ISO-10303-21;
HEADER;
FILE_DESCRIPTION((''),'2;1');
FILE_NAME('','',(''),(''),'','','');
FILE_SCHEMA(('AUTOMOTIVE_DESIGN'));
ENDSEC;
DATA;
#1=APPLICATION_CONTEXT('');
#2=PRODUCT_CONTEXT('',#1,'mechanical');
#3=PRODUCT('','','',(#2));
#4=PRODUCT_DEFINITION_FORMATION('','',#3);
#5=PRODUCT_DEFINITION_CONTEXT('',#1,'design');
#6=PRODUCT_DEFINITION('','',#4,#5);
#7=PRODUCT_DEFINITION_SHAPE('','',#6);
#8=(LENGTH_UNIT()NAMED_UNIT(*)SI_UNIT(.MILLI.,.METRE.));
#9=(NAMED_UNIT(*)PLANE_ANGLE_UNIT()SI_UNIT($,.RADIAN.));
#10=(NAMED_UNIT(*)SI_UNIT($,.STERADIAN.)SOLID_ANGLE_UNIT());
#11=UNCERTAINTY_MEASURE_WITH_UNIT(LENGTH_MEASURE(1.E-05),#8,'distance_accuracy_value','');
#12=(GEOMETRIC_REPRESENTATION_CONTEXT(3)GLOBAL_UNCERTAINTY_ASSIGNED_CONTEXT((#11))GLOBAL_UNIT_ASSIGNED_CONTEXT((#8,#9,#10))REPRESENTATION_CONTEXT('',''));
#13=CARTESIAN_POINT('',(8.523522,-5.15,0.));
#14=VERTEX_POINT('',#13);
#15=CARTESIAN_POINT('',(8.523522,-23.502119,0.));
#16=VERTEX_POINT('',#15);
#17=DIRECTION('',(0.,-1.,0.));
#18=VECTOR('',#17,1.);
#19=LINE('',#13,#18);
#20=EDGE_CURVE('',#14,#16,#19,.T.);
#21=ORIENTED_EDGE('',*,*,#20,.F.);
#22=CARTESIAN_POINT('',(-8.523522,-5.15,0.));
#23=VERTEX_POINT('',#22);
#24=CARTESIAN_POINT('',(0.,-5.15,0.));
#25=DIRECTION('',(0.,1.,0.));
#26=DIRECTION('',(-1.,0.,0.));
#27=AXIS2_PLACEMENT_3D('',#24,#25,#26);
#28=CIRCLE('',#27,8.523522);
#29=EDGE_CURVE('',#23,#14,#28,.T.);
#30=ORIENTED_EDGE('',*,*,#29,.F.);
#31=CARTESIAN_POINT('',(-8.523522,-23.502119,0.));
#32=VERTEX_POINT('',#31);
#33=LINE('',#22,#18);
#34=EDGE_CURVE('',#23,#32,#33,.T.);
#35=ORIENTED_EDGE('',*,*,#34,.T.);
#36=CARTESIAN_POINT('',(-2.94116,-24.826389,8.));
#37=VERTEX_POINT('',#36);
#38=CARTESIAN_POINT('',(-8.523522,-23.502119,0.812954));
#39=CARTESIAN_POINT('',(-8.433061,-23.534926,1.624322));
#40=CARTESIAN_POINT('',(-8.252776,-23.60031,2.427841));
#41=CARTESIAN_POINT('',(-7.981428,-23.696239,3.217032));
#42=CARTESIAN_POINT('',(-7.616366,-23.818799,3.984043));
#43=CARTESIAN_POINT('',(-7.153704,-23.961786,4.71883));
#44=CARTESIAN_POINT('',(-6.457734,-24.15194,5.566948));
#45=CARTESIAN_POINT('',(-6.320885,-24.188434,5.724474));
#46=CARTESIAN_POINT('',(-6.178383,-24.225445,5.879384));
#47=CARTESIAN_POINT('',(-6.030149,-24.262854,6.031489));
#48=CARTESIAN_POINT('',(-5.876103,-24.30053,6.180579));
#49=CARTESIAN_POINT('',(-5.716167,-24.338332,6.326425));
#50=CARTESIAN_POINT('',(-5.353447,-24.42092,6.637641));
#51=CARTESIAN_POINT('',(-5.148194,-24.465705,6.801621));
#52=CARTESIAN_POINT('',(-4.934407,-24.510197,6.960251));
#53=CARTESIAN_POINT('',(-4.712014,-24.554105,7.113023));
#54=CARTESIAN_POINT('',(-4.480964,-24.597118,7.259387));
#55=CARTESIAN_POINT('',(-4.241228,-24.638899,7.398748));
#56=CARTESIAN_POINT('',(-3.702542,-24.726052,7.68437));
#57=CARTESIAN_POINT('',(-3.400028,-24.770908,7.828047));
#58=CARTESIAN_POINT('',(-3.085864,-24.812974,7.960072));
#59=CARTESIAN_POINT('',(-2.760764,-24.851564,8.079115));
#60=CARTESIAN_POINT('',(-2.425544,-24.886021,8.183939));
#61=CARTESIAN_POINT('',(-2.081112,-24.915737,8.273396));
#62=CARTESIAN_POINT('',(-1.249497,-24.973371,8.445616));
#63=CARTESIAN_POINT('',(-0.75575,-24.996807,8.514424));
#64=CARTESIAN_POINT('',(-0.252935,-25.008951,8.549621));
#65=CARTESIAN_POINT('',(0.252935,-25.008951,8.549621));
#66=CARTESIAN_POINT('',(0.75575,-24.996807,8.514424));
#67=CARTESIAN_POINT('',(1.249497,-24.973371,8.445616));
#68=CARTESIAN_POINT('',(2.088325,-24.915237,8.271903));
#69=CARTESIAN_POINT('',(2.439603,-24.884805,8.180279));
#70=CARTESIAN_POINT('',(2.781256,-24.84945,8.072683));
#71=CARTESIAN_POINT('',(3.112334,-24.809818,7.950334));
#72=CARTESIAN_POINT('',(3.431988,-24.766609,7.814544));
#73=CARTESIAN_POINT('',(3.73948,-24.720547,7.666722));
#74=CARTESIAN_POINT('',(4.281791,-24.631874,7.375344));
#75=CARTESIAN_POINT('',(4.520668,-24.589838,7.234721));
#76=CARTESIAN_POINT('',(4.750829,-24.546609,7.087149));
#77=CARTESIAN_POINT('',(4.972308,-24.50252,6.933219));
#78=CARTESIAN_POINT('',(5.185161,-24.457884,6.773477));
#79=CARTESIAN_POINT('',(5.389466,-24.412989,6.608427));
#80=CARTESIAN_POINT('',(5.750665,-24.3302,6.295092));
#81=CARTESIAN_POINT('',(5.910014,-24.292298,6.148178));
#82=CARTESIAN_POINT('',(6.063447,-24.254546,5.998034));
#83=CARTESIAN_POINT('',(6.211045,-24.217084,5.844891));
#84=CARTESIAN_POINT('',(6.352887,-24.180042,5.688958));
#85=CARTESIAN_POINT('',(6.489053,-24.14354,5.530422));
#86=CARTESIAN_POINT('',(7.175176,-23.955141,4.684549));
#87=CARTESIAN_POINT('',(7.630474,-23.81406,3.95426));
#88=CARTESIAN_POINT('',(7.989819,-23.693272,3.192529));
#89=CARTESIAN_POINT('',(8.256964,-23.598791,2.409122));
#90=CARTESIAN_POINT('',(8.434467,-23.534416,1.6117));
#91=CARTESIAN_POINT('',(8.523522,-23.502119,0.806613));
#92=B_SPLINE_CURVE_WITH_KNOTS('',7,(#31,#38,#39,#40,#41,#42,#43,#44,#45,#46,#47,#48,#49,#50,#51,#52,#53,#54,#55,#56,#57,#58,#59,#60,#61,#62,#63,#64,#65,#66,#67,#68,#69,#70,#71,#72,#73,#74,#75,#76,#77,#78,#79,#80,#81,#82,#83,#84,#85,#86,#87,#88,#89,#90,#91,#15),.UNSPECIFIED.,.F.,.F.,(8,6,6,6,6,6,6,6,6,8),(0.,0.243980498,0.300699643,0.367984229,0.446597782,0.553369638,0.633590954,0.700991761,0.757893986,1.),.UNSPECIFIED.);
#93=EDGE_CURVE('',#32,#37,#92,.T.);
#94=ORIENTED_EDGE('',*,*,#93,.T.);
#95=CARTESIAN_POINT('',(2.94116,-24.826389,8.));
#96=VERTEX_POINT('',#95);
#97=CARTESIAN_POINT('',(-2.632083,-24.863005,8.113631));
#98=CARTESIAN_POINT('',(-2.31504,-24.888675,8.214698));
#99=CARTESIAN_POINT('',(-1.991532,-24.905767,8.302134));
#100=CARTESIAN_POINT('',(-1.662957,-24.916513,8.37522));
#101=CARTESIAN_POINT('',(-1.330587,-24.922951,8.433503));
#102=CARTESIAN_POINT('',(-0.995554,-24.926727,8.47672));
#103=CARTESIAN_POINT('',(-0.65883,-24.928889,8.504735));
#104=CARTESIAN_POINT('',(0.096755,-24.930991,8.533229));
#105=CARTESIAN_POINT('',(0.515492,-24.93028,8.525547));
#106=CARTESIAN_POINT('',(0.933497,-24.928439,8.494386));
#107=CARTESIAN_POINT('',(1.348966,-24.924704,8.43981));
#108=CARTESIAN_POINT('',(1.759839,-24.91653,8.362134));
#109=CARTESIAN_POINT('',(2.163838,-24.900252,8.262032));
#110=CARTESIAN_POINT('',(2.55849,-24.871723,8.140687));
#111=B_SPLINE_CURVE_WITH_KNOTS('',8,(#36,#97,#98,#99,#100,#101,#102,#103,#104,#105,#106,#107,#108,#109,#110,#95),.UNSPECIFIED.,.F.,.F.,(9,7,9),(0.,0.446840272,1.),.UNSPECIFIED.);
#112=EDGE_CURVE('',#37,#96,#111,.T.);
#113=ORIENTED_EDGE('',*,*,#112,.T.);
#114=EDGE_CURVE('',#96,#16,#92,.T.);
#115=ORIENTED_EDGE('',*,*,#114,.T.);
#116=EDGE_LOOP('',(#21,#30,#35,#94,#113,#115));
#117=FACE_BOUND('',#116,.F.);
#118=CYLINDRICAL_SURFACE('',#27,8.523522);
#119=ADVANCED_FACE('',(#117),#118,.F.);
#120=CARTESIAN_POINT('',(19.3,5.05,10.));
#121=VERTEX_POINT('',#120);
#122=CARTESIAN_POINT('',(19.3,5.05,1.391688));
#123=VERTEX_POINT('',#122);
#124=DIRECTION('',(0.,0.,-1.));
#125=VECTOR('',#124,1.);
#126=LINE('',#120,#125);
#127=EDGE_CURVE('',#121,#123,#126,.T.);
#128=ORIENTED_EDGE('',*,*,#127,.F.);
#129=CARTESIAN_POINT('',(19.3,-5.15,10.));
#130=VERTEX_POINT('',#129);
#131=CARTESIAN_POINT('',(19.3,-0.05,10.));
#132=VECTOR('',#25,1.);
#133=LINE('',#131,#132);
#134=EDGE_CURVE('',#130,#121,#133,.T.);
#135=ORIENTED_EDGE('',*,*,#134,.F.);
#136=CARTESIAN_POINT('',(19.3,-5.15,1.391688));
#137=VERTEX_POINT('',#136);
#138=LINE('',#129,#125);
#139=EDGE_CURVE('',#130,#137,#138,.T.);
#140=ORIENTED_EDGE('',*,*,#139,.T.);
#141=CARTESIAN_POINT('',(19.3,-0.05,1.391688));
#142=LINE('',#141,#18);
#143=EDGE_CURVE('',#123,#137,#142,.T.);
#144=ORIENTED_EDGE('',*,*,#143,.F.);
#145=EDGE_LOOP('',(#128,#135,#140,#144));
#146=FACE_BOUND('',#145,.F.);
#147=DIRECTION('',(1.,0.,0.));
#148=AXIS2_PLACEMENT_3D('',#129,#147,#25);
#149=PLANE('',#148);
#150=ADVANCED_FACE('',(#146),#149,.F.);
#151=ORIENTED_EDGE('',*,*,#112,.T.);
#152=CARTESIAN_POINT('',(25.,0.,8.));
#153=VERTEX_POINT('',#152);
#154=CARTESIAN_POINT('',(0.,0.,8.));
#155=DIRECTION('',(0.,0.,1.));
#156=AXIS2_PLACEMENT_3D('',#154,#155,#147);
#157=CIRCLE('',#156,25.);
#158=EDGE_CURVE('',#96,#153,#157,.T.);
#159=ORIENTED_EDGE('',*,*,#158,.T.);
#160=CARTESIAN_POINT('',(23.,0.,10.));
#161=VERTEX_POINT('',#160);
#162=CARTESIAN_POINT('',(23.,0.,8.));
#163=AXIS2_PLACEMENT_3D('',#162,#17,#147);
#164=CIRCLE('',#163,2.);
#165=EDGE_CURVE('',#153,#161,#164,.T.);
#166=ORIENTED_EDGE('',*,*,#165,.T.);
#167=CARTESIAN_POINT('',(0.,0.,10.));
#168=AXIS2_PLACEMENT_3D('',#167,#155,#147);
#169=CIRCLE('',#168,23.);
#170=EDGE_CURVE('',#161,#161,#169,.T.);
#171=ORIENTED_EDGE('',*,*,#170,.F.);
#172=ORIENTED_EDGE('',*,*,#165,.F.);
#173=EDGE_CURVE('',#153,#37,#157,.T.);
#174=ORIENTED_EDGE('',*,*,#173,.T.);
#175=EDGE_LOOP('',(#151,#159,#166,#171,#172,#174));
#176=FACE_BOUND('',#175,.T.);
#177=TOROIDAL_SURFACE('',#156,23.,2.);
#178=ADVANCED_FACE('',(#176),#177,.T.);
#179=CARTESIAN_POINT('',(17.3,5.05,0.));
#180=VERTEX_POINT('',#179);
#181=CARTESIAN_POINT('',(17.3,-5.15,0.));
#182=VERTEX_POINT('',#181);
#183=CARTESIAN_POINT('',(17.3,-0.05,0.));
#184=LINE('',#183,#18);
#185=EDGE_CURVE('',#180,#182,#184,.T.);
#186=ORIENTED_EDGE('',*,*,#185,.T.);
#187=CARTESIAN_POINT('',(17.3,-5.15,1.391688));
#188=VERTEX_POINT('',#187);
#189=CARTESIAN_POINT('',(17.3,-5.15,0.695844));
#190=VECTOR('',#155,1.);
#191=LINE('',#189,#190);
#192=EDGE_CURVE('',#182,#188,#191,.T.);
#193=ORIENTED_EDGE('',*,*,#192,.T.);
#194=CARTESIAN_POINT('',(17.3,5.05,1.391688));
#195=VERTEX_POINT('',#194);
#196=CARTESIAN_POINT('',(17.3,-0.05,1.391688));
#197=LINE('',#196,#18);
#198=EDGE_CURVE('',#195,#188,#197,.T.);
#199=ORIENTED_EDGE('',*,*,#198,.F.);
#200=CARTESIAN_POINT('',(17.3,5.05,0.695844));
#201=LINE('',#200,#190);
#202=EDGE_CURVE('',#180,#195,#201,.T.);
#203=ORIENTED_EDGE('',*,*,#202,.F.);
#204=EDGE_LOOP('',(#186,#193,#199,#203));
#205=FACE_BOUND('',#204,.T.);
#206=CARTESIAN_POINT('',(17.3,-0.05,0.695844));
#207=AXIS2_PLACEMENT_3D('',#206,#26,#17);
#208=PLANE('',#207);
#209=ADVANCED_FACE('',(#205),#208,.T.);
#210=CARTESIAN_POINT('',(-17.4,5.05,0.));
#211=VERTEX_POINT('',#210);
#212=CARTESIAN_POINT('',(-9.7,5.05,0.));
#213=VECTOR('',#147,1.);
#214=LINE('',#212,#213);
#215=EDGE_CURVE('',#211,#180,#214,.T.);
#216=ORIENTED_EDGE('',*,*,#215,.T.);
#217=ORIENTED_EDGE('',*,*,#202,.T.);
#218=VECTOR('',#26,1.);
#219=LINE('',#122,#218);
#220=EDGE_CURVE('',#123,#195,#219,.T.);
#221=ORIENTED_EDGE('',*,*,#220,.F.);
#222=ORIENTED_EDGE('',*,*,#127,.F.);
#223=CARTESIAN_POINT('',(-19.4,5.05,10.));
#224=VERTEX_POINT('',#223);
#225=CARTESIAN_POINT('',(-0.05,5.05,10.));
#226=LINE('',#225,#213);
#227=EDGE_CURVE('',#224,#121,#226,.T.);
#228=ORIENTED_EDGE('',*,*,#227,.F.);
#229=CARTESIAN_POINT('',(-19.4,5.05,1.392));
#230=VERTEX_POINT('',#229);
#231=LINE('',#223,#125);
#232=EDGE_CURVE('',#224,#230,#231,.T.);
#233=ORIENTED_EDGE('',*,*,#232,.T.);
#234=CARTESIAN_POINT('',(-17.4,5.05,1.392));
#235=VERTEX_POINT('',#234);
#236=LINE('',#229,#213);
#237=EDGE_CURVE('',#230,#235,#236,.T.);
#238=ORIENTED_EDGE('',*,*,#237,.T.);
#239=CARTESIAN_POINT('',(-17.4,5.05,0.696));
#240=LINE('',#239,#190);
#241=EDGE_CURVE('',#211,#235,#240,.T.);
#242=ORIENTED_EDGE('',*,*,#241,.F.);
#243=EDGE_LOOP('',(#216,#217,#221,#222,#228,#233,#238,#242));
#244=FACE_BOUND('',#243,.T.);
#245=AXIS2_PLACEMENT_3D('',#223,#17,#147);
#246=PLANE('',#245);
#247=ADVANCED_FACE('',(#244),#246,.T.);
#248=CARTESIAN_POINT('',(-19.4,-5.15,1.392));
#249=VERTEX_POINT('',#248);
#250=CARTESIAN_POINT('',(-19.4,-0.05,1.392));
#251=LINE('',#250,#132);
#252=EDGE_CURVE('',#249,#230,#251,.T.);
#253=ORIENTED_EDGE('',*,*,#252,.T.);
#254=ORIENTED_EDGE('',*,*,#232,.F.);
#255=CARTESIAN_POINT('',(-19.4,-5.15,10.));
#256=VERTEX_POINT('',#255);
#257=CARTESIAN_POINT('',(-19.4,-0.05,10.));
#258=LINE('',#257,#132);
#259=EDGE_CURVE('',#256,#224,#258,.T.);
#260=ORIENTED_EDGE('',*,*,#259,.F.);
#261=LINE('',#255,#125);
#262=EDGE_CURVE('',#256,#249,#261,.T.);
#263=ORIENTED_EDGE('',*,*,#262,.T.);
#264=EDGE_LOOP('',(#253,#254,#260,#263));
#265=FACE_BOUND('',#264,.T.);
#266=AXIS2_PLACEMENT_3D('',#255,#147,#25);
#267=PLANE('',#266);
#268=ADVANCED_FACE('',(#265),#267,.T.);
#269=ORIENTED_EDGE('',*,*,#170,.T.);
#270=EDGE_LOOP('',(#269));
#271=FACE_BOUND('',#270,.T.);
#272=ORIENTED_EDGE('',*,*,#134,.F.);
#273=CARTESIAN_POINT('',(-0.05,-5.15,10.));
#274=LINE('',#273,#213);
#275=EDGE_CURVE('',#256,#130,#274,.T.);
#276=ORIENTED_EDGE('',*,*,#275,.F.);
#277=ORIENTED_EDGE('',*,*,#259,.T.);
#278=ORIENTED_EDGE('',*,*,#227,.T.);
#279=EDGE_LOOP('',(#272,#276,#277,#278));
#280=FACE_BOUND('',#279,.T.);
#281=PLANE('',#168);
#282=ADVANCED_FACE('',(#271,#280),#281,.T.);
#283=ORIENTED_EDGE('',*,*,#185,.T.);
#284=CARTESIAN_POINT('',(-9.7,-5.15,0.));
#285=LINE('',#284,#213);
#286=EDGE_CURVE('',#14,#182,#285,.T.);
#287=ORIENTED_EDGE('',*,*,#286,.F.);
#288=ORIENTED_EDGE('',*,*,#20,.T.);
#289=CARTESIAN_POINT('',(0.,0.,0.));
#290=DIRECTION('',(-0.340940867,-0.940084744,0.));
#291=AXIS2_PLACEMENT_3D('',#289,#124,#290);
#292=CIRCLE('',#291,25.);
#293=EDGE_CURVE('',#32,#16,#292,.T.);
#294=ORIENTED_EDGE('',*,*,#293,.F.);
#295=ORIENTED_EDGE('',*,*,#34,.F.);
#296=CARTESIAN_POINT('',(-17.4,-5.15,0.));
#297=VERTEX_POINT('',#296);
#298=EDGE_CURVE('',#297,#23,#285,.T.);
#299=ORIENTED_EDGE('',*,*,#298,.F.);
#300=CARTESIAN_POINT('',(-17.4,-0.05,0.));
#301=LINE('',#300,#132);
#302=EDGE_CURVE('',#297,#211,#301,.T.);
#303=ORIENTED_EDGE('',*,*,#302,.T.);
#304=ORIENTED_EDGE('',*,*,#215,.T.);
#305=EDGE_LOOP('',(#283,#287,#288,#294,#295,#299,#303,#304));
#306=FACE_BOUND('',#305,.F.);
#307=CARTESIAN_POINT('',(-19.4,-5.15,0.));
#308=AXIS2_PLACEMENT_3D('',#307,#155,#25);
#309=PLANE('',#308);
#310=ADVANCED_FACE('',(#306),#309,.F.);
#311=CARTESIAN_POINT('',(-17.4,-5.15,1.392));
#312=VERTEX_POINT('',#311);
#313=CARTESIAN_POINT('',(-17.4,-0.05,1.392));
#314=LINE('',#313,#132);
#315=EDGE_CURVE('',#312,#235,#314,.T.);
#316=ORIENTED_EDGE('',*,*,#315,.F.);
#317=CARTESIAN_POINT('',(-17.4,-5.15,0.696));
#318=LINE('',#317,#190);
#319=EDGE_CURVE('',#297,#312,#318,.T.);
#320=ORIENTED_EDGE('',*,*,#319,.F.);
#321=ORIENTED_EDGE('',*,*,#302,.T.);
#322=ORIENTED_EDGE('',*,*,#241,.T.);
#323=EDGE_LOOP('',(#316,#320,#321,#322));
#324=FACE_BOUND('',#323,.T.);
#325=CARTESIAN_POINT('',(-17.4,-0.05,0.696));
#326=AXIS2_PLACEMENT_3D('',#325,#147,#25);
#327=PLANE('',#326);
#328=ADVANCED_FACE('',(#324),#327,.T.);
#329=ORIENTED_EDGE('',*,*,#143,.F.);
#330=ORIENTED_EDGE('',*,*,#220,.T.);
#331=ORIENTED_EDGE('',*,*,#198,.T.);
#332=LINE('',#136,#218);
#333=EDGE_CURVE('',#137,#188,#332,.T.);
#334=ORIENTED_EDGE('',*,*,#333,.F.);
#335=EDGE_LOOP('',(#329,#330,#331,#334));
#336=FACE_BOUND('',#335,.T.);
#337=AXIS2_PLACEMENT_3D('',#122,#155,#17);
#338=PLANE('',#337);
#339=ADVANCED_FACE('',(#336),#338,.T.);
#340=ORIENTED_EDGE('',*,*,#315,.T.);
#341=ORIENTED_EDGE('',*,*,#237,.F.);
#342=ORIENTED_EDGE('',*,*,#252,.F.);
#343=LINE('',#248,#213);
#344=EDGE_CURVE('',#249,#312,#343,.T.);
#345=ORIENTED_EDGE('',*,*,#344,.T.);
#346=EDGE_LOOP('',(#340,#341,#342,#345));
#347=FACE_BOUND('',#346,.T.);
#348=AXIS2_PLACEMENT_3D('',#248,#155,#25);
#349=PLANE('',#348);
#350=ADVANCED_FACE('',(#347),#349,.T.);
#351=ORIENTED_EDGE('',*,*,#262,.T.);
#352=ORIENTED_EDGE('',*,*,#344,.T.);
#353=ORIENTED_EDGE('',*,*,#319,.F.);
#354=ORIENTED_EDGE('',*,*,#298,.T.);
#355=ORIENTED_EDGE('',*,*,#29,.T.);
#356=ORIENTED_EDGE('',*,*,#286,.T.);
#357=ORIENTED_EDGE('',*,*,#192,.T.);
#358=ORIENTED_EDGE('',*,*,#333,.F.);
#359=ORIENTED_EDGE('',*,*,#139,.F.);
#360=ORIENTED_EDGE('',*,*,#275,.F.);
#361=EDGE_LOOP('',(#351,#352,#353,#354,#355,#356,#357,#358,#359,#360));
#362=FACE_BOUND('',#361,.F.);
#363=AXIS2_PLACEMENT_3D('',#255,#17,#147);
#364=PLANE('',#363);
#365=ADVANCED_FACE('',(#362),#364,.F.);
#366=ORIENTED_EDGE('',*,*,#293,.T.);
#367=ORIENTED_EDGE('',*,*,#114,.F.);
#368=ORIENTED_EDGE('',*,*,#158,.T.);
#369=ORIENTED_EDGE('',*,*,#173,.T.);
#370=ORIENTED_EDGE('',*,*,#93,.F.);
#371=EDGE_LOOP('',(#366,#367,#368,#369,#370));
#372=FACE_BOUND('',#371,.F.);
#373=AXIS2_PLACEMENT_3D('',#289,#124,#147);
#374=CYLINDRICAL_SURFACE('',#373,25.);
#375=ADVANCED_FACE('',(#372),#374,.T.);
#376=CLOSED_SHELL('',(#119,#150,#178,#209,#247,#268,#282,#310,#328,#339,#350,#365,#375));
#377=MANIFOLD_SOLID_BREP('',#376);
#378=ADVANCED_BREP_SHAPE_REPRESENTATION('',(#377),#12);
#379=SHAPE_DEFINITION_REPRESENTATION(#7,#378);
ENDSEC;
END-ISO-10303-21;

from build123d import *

# Parameters (mm, degrees)
F0_R     = 25
F1_DEPTH = 10
F2_W     = 38.7
F2_H     = 10.2
F3_DEPTH = 11
F4_W     = 10.2
F4_H     = 1.3916883618
F5_DEPTH = 2
F6_W     = 10.2
F6_H     = 1.392
F7_DEPTH = 2
F9_DEPTH = 25


# Not quite as in the source:
# - a fillet or chamfer that OpenCascade refuses, or shapes differently, is made with other operations: its cross-section is extruded or revolved along the edge and cut away or added


with BuildPart() as f1:
    # F0 (on Top) → F1 (new body)
    with BuildSketch(Plane.XY):
        Circle(F0_R)
    extrude(amount=F1_DEPTH)

    # F2 (on face) → F3 (cut)
    with BuildSketch(Plane.XY.offset(10)):
        with Locations((-0.05, -0.05)):
            Rectangle(F2_W, F2_H)
    extrude(amount=-F3_DEPTH, mode=Mode.SUBTRACT)

    # F4 (on face) → F5 (join)
    with BuildSketch(Plane(origin=(19.3, 0, 0), x_dir=(0, -1, 0), z_dir=(-1, 0, 0))):
        with Locations((0.05, 0.6958441809)):
            Rectangle(F4_W, F4_H)
    extrude(amount=F5_DEPTH)

    # F6 (on face) → F7 (join)
    with BuildSketch(Plane.YZ.offset(-19.4)):
        with Locations((-0.05, 0.696)):
            Rectangle(F6_W, F6_H)
    extrude(amount=F7_DEPTH)

    # F8 (on face) → F9 (cut)
    with BuildSketch(Plane(origin=(0, -5.15, 0), x_dir=(-1, 0, 0), z_dir=(0, 1, 0))):
        with BuildLine():
            Line((-8.5235216661, 0), (8.5235216661, 0))
            ThreePointArc((8.5235216661, 0), (0, 8.5235216661), (-8.5235216661, 0))
        make_face()
    extrude(amount=-F9_DEPTH, mode=Mode.SUBTRACT)

    # F10: fillet of radius 2 on 1 edges, made by hand

    # F10_s1 → F10_t2 (revolve, cut)
    with BuildSketch(Plane.XZ):
        with BuildLine():
            ThreePointArc((25, 8), (24.4142135624, 9.4142135624), (23, 10))
            Line((23, 10), (25, 10))
            Line((25, 10), (25, 8))
        make_face()
    revolve(axis=Axis((0, 0, 10), (0, 0, 1)), mode=Mode.SUBTRACT)


solid = f1.part
